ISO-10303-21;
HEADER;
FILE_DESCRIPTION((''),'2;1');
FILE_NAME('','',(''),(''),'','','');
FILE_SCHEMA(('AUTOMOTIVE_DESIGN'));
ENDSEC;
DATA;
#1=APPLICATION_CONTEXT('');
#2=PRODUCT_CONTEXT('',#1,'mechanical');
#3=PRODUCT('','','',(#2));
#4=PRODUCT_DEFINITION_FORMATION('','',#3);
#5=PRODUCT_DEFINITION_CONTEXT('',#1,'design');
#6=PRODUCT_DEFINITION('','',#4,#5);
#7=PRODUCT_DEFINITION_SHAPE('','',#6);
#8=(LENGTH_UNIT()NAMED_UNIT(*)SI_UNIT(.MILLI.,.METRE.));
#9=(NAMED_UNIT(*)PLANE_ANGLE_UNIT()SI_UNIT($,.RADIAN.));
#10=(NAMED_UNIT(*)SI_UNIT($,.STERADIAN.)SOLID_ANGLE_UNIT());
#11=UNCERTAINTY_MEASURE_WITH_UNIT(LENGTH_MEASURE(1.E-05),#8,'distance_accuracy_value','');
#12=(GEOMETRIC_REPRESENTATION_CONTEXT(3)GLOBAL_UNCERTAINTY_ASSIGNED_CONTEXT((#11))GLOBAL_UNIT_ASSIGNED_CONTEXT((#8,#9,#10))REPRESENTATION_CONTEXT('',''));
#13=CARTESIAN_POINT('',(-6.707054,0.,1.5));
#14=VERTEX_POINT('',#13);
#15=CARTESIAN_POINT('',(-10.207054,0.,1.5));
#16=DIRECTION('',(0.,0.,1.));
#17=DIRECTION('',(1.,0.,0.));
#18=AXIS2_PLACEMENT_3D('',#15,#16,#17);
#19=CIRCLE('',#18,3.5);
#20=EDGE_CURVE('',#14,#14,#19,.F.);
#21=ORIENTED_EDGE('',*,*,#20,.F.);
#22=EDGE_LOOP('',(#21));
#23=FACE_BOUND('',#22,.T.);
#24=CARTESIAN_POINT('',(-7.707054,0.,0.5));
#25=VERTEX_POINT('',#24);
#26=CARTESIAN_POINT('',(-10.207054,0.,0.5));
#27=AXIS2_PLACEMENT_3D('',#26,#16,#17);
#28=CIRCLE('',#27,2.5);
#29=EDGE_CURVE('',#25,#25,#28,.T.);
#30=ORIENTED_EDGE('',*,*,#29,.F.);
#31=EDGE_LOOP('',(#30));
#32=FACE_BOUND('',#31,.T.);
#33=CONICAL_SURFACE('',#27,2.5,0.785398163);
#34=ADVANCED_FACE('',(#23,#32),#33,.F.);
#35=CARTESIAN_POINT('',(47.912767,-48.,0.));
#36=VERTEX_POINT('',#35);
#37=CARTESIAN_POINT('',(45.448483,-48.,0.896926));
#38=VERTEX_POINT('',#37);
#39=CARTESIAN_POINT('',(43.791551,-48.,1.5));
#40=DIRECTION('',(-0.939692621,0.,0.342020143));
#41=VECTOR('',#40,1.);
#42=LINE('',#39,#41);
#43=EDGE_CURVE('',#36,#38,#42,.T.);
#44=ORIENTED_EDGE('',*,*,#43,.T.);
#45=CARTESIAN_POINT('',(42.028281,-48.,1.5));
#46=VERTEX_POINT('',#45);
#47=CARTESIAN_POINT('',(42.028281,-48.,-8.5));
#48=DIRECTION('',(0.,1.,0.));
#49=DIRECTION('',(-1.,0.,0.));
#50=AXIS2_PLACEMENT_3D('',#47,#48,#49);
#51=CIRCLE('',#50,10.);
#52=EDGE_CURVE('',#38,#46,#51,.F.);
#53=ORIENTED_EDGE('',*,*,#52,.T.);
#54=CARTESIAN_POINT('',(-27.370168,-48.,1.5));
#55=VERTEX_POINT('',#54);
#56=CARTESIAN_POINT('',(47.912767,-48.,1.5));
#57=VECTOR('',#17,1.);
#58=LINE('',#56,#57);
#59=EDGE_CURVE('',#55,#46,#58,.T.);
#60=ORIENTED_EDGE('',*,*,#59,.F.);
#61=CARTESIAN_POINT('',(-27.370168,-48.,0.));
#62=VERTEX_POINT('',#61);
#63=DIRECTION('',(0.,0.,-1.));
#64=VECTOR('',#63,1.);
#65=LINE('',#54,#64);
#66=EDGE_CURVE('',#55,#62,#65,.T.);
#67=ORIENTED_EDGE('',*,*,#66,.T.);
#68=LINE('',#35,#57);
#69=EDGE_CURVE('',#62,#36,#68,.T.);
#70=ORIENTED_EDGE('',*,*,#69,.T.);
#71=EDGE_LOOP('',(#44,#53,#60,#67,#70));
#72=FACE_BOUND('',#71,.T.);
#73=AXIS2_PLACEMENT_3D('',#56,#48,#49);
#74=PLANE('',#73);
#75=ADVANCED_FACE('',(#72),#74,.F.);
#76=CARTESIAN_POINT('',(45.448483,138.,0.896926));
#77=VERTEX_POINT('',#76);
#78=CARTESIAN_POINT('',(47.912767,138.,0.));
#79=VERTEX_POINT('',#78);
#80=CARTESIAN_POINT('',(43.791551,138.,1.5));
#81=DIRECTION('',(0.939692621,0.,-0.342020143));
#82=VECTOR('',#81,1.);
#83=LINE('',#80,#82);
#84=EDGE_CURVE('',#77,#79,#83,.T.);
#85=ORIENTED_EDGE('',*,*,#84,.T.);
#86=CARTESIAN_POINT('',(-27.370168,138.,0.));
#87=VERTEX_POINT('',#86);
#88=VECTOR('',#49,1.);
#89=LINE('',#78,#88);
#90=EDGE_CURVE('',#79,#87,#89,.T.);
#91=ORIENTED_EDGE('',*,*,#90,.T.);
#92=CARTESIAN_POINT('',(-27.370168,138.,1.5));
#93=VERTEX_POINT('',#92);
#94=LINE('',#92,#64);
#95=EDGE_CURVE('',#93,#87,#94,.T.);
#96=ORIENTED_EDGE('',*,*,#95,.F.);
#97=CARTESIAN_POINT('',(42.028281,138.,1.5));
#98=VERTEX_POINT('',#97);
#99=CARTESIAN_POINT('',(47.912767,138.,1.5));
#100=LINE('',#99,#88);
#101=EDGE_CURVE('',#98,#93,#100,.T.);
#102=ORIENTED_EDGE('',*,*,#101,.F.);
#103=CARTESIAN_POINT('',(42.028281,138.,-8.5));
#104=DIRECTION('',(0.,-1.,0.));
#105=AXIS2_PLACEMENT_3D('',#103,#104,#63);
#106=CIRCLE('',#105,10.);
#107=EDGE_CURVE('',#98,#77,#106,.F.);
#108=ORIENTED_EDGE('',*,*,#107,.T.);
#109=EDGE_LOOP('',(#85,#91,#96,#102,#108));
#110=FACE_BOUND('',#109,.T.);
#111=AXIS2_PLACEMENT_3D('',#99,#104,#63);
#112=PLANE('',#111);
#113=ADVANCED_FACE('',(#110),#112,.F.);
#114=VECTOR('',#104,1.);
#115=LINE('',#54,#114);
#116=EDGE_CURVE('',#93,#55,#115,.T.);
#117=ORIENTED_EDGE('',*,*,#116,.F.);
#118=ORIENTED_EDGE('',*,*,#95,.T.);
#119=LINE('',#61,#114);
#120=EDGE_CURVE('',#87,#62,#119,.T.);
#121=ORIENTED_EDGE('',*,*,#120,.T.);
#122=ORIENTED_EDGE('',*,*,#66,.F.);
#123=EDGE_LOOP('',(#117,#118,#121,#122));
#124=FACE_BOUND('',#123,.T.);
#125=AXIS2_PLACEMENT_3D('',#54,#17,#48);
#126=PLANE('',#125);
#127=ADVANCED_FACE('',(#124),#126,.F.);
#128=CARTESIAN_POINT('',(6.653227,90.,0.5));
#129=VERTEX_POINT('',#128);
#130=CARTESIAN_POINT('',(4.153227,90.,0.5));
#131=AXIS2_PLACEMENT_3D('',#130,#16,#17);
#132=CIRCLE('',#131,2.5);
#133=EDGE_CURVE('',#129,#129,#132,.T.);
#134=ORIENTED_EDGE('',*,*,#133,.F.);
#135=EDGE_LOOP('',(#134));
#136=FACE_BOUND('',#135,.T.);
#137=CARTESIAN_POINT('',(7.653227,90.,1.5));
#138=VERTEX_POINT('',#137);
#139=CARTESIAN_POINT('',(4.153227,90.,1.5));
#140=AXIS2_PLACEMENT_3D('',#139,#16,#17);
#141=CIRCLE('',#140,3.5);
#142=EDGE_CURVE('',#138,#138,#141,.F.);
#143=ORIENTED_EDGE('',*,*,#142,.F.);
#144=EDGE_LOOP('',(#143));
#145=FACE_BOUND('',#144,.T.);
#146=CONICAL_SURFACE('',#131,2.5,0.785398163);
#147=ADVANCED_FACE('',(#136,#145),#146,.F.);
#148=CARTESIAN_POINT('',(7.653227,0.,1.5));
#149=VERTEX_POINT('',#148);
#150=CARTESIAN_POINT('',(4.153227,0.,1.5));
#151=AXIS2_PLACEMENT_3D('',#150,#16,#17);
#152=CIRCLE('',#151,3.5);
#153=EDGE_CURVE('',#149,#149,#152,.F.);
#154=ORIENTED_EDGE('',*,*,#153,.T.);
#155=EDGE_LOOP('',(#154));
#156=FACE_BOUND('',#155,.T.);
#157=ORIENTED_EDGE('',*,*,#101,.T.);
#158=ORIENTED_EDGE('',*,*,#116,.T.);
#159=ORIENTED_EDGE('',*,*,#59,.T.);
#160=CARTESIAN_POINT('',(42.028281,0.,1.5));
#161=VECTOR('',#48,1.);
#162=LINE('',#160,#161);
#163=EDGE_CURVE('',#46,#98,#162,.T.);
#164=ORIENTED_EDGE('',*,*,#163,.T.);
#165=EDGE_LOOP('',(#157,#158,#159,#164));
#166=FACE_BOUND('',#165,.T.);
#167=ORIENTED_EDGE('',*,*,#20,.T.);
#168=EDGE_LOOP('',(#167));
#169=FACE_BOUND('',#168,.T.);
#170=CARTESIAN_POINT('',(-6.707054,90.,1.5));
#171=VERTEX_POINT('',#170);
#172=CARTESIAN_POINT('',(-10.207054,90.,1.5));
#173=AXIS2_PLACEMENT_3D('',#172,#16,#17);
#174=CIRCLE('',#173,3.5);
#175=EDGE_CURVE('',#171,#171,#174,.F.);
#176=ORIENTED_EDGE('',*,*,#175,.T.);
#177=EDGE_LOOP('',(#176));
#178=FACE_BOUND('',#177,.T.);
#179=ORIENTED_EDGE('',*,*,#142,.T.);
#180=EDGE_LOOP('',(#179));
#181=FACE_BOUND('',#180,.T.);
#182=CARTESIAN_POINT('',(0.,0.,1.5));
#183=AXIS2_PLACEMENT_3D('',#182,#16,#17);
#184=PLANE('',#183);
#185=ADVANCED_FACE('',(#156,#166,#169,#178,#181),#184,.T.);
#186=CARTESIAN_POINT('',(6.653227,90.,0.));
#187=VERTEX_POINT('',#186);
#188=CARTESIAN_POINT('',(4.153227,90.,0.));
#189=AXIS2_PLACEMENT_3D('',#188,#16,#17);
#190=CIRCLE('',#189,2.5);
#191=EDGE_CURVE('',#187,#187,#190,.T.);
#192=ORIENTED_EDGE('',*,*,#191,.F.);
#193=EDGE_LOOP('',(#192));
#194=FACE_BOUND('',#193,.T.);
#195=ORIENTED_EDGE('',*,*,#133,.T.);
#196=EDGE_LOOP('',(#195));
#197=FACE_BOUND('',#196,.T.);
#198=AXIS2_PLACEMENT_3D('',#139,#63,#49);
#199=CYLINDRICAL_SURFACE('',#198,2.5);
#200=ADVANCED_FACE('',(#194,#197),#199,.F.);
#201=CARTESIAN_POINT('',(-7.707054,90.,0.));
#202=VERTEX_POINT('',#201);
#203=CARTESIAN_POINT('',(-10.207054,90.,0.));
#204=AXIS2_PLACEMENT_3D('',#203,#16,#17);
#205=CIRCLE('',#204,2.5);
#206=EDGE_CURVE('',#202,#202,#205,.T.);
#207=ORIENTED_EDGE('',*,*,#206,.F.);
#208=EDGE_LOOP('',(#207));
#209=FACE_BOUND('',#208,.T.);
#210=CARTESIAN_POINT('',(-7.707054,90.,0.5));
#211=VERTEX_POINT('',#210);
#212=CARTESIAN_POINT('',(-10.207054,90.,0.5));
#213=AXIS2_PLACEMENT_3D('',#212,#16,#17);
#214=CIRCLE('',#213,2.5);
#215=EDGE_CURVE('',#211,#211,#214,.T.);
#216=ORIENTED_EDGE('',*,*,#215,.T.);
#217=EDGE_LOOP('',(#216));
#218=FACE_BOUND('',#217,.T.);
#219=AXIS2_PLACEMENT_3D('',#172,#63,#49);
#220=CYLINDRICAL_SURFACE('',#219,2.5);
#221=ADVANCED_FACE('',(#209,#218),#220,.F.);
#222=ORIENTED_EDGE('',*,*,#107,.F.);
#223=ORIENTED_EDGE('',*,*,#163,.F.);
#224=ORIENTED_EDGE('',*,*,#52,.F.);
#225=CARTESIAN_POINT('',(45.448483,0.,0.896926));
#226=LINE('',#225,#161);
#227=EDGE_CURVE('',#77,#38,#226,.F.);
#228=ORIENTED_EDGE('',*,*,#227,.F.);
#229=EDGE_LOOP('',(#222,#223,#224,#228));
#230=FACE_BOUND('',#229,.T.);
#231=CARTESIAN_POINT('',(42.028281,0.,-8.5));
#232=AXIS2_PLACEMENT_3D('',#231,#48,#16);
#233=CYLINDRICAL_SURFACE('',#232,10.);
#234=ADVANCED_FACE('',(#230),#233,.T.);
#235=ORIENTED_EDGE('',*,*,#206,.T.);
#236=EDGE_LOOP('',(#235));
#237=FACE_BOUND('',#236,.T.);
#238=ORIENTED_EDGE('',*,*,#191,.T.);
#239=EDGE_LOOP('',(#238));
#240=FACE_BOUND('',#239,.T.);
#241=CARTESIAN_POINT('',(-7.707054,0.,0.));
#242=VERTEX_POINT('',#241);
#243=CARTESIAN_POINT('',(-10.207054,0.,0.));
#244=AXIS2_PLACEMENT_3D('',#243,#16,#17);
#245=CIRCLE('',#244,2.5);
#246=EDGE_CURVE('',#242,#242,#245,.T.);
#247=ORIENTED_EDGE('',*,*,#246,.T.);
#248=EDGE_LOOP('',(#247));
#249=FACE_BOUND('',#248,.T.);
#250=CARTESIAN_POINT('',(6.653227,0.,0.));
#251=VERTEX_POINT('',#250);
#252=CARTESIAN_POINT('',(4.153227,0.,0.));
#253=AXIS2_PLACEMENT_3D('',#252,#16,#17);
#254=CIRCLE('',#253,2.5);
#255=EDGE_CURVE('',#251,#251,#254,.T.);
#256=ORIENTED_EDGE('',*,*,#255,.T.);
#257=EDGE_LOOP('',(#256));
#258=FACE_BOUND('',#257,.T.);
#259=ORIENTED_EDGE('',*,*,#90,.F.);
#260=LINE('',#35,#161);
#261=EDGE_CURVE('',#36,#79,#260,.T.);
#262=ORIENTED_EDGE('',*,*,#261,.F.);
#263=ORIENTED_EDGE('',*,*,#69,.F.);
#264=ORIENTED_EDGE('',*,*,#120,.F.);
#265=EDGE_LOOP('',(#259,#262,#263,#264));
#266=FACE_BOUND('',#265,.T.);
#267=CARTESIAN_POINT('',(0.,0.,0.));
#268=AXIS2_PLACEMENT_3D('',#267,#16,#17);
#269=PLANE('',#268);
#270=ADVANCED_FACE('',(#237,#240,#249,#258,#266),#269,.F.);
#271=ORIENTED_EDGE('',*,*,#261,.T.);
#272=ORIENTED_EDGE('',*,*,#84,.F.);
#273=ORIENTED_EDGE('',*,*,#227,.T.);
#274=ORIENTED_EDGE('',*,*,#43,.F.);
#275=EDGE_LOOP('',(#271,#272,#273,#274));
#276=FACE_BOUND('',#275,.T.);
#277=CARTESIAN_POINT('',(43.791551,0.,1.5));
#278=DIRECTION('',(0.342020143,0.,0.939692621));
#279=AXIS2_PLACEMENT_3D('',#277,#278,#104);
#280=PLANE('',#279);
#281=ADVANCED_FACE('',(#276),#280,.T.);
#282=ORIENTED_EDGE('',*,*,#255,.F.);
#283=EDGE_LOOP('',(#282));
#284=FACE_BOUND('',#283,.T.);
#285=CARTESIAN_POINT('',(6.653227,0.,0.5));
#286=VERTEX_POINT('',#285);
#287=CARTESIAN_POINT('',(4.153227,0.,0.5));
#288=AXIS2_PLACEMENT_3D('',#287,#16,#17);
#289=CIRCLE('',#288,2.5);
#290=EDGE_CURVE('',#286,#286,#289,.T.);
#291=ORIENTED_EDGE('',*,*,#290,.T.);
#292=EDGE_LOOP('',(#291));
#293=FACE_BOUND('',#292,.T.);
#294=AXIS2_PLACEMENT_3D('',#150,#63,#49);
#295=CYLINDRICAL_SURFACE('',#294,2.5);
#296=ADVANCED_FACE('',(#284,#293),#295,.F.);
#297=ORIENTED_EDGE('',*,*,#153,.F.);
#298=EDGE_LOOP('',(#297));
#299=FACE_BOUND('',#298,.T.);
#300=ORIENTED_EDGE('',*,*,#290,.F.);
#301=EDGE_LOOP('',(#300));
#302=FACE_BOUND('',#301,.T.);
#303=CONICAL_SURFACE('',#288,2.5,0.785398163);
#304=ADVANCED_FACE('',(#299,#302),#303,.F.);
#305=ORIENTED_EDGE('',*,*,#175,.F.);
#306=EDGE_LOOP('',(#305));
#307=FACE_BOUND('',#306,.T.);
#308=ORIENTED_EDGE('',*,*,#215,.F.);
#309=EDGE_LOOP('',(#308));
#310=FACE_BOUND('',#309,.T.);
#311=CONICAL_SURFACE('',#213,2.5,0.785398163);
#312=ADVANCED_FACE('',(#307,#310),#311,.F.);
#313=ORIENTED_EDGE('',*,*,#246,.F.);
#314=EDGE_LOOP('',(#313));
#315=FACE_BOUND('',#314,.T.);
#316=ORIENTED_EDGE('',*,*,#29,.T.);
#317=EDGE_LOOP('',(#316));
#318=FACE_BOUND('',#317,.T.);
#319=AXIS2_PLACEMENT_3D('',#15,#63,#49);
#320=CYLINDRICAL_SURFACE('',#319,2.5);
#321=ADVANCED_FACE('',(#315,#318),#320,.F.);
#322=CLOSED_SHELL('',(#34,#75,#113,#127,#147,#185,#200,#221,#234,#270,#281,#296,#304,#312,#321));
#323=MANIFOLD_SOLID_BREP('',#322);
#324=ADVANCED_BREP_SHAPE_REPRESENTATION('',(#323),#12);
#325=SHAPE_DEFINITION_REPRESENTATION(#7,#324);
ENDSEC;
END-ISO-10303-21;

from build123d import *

# Parameters (mm, degrees)
ESQUISSE1_W        = 75.282935443
ESQUISSE1_H        = 186
ESQUISSE1_R        = 2.5
BOSS_EXTRU_1_DEPTH = 1.5
CHANFREIN3_SIZE    = 1.5
CHANFREIN3_SIZE_2  = 4.121216129
CONG_2_R           = 10
CHANFREIN4_SIZE    = 1


with BuildPart() as part:
    # Esquisse1 → Boss.-Extru.1 (new body)
    with BuildSketch(Plane.XY):
        with Locations((10.271299444, 45)):
            Rectangle(ESQUISSE1_W, ESQUISSE1_H)
        with Locations((-10.20705442, 90)):
            Circle(ESQUISSE1_R, mode=Mode.SUBTRACT)
        with Locations((4.153227182, 90)):
            Circle(ESQUISSE1_R, mode=Mode.SUBTRACT)
        with Locations((-10.20705442, 0)):
            Circle(ESQUISSE1_R, mode=Mode.SUBTRACT)
        with Locations((4.153227182, 0)):
            Circle(ESQUISSE1_R, mode=Mode.SUBTRACT)
    extrude(amount=BOSS_EXTRU_1_DEPTH)

    # Chanfrein3
    # the kernel refuses this chamfer: 4.121216129, 1.5 mm, written as the material it takes off along each edge
    with BuildSketch(Plane(origin=(47.912767165, 148.691237174, 1.5), x_dir=(0.09904090225205177, 0, -0.9950833631817484), z_dir=(0, -1, 0))) as chanfrein3_piece_1:
        Polygon((CHANFREIN3_SIZE * 0.995083363182, -CHANFREIN3_SIZE * 0.0990409022521), (-CHANFREIN3_SIZE_2 * 0.0990409022564, -CHANFREIN3_SIZE_2 * 0.995083363226), (0, 0), align=None)
    extrude(amount=207.382474348, mode=Mode.SUBTRACT)

    # Congé2
    cong_2_edges = [part.edges().sort_by_distance(p)[0] for p in [
        (43.791551035, 45, 1.5),
    ]]
    fillet(cong_2_edges, radius=CONG_2_R)

    # Chanfrein4
    chanfrein4_edges = [part.edges().sort_by_distance(p)[0] for p in [
        (-12.70705442, 90, 1.5),
        (1.653227182, 90, 1.5),
        (-12.70705442, 0, 1.5),
        (1.653227182, 0, 1.5),
    ]]
    chamfer(chanfrein4_edges, length=CHANFREIN4_SIZE)


solid = part.part
